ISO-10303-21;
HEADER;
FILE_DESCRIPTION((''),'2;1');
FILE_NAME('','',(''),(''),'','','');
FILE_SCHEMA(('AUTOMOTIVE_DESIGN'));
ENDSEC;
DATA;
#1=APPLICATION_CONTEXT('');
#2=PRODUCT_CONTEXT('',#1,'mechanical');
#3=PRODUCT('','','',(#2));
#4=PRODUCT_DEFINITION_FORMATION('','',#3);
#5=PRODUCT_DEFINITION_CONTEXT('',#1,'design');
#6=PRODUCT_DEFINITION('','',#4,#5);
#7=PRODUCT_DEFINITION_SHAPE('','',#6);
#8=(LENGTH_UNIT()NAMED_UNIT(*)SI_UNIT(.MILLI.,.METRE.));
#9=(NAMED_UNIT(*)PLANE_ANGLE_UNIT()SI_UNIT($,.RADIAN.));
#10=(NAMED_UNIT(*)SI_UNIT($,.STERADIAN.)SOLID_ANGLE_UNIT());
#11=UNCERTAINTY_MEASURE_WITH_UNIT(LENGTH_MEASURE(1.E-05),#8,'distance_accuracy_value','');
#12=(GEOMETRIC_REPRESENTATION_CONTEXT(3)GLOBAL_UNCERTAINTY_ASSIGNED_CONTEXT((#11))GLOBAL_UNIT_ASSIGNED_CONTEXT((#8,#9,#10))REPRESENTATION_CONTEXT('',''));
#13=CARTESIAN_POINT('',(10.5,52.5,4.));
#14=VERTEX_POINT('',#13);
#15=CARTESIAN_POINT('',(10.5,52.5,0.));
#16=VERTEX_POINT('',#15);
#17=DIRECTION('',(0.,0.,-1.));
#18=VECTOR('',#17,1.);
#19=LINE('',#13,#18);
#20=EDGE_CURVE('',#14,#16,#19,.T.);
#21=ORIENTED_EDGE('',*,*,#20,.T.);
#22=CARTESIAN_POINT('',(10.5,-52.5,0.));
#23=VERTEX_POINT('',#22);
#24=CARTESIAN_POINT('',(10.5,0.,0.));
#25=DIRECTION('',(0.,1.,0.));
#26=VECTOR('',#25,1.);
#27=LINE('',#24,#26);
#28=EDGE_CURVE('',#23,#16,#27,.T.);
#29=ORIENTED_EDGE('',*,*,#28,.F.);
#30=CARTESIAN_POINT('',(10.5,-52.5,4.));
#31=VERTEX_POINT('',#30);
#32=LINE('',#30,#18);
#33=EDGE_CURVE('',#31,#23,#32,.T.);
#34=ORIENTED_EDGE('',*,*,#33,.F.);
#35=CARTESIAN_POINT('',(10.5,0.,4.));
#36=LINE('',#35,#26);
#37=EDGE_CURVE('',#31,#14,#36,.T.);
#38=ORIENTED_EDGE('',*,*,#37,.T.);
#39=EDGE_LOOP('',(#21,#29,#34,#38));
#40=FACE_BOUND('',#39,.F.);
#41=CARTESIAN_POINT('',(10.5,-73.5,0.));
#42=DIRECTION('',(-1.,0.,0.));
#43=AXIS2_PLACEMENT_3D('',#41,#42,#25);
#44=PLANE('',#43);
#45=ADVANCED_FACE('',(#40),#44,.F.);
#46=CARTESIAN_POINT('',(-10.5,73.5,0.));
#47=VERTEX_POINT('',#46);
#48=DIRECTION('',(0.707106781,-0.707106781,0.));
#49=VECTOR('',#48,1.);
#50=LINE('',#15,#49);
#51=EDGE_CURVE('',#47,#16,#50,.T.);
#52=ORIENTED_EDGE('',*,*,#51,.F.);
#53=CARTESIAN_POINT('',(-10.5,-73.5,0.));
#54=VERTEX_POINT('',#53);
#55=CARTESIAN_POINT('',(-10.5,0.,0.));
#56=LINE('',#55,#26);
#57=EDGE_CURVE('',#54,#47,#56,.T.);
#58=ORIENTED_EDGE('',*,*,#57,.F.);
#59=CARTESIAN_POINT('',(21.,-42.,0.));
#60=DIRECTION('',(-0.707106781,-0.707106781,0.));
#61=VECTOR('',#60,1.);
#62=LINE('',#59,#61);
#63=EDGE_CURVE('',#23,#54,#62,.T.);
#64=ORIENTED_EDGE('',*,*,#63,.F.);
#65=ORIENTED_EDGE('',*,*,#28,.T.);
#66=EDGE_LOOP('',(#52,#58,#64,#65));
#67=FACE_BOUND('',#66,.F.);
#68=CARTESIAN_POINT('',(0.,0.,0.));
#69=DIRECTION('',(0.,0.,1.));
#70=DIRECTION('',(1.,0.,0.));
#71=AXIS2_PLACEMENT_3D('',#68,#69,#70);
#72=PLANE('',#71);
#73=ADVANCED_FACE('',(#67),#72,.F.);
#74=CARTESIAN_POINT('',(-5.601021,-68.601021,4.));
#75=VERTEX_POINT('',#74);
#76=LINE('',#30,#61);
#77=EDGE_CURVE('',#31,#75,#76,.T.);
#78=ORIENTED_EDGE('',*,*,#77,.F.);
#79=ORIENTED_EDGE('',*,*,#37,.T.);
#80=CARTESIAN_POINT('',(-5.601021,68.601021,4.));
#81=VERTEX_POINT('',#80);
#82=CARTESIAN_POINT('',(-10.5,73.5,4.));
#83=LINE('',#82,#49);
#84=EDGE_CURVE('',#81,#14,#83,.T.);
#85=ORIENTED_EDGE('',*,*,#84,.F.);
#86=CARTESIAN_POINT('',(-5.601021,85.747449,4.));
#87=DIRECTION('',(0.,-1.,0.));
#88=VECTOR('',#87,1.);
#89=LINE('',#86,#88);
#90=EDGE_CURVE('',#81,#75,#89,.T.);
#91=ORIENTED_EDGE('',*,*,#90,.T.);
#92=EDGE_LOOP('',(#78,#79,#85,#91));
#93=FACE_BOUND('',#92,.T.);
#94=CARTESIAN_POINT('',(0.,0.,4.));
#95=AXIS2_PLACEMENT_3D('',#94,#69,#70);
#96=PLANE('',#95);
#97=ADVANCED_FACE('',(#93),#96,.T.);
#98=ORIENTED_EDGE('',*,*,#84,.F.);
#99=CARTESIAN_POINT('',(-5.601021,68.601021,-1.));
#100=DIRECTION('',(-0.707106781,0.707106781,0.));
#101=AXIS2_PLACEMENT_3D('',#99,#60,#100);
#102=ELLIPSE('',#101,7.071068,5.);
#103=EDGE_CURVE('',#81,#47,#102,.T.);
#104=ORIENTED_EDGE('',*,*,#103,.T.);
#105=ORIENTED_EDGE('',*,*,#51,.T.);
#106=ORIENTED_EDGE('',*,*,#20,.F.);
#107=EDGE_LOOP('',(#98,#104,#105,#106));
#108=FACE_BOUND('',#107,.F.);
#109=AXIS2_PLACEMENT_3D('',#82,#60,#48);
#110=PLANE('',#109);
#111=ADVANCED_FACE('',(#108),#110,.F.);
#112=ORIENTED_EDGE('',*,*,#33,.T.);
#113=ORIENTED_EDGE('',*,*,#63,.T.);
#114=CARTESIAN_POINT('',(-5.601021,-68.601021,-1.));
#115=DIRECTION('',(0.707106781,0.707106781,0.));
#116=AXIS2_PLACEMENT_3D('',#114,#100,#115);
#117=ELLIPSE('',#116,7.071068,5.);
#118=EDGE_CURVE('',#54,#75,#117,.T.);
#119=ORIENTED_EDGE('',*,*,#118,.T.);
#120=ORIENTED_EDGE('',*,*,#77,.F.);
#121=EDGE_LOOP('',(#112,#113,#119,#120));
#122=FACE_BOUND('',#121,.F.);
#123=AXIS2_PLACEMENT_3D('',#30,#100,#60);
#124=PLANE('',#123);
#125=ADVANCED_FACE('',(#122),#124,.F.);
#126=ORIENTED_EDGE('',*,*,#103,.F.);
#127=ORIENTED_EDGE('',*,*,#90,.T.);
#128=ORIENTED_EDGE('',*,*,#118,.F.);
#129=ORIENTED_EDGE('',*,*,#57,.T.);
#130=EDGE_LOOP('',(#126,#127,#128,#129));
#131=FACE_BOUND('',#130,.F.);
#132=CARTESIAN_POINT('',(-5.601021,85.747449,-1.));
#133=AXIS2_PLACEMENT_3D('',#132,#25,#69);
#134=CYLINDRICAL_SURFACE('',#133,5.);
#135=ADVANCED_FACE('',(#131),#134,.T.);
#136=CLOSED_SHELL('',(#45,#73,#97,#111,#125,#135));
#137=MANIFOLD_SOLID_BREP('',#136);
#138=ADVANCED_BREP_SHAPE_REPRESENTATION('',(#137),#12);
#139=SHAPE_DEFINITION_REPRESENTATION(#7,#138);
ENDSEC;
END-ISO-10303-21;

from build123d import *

# Parameters (mm, degrees)
F0_W        = 21
F0_H        = 147
F1_DEPTH    = 4
F3_DEPTH    = 4.001
F4_T1_DEPTH = 171.4948974279


# Not quite as in the source:
# - a fillet or chamfer that OpenCascade refuses, or shapes differently, is made with other operations: its cross-section is extruded or revolved along the edge and cut away or added


with BuildPart() as f1:
    # F0 (on Top) → F1 (new body)
    with BuildSketch(Plane.XY):
        Rectangle(F0_W, F0_H)
    extrude(amount=F1_DEPTH)

    # F2 (on face) → F3 (cut, through all)
    with BuildSketch(Plane.XY.offset(4)):
        Polygon((10.5, 73.5), (-10.5, 73.5), (10.5, 52.5), align=None)
        Polygon((10.5, -52.5), (-10.5, -73.5), (10.5, -73.5), align=None)
    extrude(amount=-F3_DEPTH, mode=Mode.SUBTRACT)

    # F4: fillet of radius 5 on 1 edges, made by hand

    # F4_s2 → F4_t1 (cut)
    with BuildSketch(Plane.XZ.offset(-85.7474487139)):
        with BuildLine():
            ThreePointArc((-5.6010205144, 4), (-8.7632981746, 2.8729833462), (-10.5, 0))
            Line((-10.5, 0), (-10.5, 4))
            Line((-10.5, 4), (-5.6010205144, 4))
        make_face()
    extrude(amount=F4_T1_DEPTH, mode=Mode.SUBTRACT)


solid = f1.part
